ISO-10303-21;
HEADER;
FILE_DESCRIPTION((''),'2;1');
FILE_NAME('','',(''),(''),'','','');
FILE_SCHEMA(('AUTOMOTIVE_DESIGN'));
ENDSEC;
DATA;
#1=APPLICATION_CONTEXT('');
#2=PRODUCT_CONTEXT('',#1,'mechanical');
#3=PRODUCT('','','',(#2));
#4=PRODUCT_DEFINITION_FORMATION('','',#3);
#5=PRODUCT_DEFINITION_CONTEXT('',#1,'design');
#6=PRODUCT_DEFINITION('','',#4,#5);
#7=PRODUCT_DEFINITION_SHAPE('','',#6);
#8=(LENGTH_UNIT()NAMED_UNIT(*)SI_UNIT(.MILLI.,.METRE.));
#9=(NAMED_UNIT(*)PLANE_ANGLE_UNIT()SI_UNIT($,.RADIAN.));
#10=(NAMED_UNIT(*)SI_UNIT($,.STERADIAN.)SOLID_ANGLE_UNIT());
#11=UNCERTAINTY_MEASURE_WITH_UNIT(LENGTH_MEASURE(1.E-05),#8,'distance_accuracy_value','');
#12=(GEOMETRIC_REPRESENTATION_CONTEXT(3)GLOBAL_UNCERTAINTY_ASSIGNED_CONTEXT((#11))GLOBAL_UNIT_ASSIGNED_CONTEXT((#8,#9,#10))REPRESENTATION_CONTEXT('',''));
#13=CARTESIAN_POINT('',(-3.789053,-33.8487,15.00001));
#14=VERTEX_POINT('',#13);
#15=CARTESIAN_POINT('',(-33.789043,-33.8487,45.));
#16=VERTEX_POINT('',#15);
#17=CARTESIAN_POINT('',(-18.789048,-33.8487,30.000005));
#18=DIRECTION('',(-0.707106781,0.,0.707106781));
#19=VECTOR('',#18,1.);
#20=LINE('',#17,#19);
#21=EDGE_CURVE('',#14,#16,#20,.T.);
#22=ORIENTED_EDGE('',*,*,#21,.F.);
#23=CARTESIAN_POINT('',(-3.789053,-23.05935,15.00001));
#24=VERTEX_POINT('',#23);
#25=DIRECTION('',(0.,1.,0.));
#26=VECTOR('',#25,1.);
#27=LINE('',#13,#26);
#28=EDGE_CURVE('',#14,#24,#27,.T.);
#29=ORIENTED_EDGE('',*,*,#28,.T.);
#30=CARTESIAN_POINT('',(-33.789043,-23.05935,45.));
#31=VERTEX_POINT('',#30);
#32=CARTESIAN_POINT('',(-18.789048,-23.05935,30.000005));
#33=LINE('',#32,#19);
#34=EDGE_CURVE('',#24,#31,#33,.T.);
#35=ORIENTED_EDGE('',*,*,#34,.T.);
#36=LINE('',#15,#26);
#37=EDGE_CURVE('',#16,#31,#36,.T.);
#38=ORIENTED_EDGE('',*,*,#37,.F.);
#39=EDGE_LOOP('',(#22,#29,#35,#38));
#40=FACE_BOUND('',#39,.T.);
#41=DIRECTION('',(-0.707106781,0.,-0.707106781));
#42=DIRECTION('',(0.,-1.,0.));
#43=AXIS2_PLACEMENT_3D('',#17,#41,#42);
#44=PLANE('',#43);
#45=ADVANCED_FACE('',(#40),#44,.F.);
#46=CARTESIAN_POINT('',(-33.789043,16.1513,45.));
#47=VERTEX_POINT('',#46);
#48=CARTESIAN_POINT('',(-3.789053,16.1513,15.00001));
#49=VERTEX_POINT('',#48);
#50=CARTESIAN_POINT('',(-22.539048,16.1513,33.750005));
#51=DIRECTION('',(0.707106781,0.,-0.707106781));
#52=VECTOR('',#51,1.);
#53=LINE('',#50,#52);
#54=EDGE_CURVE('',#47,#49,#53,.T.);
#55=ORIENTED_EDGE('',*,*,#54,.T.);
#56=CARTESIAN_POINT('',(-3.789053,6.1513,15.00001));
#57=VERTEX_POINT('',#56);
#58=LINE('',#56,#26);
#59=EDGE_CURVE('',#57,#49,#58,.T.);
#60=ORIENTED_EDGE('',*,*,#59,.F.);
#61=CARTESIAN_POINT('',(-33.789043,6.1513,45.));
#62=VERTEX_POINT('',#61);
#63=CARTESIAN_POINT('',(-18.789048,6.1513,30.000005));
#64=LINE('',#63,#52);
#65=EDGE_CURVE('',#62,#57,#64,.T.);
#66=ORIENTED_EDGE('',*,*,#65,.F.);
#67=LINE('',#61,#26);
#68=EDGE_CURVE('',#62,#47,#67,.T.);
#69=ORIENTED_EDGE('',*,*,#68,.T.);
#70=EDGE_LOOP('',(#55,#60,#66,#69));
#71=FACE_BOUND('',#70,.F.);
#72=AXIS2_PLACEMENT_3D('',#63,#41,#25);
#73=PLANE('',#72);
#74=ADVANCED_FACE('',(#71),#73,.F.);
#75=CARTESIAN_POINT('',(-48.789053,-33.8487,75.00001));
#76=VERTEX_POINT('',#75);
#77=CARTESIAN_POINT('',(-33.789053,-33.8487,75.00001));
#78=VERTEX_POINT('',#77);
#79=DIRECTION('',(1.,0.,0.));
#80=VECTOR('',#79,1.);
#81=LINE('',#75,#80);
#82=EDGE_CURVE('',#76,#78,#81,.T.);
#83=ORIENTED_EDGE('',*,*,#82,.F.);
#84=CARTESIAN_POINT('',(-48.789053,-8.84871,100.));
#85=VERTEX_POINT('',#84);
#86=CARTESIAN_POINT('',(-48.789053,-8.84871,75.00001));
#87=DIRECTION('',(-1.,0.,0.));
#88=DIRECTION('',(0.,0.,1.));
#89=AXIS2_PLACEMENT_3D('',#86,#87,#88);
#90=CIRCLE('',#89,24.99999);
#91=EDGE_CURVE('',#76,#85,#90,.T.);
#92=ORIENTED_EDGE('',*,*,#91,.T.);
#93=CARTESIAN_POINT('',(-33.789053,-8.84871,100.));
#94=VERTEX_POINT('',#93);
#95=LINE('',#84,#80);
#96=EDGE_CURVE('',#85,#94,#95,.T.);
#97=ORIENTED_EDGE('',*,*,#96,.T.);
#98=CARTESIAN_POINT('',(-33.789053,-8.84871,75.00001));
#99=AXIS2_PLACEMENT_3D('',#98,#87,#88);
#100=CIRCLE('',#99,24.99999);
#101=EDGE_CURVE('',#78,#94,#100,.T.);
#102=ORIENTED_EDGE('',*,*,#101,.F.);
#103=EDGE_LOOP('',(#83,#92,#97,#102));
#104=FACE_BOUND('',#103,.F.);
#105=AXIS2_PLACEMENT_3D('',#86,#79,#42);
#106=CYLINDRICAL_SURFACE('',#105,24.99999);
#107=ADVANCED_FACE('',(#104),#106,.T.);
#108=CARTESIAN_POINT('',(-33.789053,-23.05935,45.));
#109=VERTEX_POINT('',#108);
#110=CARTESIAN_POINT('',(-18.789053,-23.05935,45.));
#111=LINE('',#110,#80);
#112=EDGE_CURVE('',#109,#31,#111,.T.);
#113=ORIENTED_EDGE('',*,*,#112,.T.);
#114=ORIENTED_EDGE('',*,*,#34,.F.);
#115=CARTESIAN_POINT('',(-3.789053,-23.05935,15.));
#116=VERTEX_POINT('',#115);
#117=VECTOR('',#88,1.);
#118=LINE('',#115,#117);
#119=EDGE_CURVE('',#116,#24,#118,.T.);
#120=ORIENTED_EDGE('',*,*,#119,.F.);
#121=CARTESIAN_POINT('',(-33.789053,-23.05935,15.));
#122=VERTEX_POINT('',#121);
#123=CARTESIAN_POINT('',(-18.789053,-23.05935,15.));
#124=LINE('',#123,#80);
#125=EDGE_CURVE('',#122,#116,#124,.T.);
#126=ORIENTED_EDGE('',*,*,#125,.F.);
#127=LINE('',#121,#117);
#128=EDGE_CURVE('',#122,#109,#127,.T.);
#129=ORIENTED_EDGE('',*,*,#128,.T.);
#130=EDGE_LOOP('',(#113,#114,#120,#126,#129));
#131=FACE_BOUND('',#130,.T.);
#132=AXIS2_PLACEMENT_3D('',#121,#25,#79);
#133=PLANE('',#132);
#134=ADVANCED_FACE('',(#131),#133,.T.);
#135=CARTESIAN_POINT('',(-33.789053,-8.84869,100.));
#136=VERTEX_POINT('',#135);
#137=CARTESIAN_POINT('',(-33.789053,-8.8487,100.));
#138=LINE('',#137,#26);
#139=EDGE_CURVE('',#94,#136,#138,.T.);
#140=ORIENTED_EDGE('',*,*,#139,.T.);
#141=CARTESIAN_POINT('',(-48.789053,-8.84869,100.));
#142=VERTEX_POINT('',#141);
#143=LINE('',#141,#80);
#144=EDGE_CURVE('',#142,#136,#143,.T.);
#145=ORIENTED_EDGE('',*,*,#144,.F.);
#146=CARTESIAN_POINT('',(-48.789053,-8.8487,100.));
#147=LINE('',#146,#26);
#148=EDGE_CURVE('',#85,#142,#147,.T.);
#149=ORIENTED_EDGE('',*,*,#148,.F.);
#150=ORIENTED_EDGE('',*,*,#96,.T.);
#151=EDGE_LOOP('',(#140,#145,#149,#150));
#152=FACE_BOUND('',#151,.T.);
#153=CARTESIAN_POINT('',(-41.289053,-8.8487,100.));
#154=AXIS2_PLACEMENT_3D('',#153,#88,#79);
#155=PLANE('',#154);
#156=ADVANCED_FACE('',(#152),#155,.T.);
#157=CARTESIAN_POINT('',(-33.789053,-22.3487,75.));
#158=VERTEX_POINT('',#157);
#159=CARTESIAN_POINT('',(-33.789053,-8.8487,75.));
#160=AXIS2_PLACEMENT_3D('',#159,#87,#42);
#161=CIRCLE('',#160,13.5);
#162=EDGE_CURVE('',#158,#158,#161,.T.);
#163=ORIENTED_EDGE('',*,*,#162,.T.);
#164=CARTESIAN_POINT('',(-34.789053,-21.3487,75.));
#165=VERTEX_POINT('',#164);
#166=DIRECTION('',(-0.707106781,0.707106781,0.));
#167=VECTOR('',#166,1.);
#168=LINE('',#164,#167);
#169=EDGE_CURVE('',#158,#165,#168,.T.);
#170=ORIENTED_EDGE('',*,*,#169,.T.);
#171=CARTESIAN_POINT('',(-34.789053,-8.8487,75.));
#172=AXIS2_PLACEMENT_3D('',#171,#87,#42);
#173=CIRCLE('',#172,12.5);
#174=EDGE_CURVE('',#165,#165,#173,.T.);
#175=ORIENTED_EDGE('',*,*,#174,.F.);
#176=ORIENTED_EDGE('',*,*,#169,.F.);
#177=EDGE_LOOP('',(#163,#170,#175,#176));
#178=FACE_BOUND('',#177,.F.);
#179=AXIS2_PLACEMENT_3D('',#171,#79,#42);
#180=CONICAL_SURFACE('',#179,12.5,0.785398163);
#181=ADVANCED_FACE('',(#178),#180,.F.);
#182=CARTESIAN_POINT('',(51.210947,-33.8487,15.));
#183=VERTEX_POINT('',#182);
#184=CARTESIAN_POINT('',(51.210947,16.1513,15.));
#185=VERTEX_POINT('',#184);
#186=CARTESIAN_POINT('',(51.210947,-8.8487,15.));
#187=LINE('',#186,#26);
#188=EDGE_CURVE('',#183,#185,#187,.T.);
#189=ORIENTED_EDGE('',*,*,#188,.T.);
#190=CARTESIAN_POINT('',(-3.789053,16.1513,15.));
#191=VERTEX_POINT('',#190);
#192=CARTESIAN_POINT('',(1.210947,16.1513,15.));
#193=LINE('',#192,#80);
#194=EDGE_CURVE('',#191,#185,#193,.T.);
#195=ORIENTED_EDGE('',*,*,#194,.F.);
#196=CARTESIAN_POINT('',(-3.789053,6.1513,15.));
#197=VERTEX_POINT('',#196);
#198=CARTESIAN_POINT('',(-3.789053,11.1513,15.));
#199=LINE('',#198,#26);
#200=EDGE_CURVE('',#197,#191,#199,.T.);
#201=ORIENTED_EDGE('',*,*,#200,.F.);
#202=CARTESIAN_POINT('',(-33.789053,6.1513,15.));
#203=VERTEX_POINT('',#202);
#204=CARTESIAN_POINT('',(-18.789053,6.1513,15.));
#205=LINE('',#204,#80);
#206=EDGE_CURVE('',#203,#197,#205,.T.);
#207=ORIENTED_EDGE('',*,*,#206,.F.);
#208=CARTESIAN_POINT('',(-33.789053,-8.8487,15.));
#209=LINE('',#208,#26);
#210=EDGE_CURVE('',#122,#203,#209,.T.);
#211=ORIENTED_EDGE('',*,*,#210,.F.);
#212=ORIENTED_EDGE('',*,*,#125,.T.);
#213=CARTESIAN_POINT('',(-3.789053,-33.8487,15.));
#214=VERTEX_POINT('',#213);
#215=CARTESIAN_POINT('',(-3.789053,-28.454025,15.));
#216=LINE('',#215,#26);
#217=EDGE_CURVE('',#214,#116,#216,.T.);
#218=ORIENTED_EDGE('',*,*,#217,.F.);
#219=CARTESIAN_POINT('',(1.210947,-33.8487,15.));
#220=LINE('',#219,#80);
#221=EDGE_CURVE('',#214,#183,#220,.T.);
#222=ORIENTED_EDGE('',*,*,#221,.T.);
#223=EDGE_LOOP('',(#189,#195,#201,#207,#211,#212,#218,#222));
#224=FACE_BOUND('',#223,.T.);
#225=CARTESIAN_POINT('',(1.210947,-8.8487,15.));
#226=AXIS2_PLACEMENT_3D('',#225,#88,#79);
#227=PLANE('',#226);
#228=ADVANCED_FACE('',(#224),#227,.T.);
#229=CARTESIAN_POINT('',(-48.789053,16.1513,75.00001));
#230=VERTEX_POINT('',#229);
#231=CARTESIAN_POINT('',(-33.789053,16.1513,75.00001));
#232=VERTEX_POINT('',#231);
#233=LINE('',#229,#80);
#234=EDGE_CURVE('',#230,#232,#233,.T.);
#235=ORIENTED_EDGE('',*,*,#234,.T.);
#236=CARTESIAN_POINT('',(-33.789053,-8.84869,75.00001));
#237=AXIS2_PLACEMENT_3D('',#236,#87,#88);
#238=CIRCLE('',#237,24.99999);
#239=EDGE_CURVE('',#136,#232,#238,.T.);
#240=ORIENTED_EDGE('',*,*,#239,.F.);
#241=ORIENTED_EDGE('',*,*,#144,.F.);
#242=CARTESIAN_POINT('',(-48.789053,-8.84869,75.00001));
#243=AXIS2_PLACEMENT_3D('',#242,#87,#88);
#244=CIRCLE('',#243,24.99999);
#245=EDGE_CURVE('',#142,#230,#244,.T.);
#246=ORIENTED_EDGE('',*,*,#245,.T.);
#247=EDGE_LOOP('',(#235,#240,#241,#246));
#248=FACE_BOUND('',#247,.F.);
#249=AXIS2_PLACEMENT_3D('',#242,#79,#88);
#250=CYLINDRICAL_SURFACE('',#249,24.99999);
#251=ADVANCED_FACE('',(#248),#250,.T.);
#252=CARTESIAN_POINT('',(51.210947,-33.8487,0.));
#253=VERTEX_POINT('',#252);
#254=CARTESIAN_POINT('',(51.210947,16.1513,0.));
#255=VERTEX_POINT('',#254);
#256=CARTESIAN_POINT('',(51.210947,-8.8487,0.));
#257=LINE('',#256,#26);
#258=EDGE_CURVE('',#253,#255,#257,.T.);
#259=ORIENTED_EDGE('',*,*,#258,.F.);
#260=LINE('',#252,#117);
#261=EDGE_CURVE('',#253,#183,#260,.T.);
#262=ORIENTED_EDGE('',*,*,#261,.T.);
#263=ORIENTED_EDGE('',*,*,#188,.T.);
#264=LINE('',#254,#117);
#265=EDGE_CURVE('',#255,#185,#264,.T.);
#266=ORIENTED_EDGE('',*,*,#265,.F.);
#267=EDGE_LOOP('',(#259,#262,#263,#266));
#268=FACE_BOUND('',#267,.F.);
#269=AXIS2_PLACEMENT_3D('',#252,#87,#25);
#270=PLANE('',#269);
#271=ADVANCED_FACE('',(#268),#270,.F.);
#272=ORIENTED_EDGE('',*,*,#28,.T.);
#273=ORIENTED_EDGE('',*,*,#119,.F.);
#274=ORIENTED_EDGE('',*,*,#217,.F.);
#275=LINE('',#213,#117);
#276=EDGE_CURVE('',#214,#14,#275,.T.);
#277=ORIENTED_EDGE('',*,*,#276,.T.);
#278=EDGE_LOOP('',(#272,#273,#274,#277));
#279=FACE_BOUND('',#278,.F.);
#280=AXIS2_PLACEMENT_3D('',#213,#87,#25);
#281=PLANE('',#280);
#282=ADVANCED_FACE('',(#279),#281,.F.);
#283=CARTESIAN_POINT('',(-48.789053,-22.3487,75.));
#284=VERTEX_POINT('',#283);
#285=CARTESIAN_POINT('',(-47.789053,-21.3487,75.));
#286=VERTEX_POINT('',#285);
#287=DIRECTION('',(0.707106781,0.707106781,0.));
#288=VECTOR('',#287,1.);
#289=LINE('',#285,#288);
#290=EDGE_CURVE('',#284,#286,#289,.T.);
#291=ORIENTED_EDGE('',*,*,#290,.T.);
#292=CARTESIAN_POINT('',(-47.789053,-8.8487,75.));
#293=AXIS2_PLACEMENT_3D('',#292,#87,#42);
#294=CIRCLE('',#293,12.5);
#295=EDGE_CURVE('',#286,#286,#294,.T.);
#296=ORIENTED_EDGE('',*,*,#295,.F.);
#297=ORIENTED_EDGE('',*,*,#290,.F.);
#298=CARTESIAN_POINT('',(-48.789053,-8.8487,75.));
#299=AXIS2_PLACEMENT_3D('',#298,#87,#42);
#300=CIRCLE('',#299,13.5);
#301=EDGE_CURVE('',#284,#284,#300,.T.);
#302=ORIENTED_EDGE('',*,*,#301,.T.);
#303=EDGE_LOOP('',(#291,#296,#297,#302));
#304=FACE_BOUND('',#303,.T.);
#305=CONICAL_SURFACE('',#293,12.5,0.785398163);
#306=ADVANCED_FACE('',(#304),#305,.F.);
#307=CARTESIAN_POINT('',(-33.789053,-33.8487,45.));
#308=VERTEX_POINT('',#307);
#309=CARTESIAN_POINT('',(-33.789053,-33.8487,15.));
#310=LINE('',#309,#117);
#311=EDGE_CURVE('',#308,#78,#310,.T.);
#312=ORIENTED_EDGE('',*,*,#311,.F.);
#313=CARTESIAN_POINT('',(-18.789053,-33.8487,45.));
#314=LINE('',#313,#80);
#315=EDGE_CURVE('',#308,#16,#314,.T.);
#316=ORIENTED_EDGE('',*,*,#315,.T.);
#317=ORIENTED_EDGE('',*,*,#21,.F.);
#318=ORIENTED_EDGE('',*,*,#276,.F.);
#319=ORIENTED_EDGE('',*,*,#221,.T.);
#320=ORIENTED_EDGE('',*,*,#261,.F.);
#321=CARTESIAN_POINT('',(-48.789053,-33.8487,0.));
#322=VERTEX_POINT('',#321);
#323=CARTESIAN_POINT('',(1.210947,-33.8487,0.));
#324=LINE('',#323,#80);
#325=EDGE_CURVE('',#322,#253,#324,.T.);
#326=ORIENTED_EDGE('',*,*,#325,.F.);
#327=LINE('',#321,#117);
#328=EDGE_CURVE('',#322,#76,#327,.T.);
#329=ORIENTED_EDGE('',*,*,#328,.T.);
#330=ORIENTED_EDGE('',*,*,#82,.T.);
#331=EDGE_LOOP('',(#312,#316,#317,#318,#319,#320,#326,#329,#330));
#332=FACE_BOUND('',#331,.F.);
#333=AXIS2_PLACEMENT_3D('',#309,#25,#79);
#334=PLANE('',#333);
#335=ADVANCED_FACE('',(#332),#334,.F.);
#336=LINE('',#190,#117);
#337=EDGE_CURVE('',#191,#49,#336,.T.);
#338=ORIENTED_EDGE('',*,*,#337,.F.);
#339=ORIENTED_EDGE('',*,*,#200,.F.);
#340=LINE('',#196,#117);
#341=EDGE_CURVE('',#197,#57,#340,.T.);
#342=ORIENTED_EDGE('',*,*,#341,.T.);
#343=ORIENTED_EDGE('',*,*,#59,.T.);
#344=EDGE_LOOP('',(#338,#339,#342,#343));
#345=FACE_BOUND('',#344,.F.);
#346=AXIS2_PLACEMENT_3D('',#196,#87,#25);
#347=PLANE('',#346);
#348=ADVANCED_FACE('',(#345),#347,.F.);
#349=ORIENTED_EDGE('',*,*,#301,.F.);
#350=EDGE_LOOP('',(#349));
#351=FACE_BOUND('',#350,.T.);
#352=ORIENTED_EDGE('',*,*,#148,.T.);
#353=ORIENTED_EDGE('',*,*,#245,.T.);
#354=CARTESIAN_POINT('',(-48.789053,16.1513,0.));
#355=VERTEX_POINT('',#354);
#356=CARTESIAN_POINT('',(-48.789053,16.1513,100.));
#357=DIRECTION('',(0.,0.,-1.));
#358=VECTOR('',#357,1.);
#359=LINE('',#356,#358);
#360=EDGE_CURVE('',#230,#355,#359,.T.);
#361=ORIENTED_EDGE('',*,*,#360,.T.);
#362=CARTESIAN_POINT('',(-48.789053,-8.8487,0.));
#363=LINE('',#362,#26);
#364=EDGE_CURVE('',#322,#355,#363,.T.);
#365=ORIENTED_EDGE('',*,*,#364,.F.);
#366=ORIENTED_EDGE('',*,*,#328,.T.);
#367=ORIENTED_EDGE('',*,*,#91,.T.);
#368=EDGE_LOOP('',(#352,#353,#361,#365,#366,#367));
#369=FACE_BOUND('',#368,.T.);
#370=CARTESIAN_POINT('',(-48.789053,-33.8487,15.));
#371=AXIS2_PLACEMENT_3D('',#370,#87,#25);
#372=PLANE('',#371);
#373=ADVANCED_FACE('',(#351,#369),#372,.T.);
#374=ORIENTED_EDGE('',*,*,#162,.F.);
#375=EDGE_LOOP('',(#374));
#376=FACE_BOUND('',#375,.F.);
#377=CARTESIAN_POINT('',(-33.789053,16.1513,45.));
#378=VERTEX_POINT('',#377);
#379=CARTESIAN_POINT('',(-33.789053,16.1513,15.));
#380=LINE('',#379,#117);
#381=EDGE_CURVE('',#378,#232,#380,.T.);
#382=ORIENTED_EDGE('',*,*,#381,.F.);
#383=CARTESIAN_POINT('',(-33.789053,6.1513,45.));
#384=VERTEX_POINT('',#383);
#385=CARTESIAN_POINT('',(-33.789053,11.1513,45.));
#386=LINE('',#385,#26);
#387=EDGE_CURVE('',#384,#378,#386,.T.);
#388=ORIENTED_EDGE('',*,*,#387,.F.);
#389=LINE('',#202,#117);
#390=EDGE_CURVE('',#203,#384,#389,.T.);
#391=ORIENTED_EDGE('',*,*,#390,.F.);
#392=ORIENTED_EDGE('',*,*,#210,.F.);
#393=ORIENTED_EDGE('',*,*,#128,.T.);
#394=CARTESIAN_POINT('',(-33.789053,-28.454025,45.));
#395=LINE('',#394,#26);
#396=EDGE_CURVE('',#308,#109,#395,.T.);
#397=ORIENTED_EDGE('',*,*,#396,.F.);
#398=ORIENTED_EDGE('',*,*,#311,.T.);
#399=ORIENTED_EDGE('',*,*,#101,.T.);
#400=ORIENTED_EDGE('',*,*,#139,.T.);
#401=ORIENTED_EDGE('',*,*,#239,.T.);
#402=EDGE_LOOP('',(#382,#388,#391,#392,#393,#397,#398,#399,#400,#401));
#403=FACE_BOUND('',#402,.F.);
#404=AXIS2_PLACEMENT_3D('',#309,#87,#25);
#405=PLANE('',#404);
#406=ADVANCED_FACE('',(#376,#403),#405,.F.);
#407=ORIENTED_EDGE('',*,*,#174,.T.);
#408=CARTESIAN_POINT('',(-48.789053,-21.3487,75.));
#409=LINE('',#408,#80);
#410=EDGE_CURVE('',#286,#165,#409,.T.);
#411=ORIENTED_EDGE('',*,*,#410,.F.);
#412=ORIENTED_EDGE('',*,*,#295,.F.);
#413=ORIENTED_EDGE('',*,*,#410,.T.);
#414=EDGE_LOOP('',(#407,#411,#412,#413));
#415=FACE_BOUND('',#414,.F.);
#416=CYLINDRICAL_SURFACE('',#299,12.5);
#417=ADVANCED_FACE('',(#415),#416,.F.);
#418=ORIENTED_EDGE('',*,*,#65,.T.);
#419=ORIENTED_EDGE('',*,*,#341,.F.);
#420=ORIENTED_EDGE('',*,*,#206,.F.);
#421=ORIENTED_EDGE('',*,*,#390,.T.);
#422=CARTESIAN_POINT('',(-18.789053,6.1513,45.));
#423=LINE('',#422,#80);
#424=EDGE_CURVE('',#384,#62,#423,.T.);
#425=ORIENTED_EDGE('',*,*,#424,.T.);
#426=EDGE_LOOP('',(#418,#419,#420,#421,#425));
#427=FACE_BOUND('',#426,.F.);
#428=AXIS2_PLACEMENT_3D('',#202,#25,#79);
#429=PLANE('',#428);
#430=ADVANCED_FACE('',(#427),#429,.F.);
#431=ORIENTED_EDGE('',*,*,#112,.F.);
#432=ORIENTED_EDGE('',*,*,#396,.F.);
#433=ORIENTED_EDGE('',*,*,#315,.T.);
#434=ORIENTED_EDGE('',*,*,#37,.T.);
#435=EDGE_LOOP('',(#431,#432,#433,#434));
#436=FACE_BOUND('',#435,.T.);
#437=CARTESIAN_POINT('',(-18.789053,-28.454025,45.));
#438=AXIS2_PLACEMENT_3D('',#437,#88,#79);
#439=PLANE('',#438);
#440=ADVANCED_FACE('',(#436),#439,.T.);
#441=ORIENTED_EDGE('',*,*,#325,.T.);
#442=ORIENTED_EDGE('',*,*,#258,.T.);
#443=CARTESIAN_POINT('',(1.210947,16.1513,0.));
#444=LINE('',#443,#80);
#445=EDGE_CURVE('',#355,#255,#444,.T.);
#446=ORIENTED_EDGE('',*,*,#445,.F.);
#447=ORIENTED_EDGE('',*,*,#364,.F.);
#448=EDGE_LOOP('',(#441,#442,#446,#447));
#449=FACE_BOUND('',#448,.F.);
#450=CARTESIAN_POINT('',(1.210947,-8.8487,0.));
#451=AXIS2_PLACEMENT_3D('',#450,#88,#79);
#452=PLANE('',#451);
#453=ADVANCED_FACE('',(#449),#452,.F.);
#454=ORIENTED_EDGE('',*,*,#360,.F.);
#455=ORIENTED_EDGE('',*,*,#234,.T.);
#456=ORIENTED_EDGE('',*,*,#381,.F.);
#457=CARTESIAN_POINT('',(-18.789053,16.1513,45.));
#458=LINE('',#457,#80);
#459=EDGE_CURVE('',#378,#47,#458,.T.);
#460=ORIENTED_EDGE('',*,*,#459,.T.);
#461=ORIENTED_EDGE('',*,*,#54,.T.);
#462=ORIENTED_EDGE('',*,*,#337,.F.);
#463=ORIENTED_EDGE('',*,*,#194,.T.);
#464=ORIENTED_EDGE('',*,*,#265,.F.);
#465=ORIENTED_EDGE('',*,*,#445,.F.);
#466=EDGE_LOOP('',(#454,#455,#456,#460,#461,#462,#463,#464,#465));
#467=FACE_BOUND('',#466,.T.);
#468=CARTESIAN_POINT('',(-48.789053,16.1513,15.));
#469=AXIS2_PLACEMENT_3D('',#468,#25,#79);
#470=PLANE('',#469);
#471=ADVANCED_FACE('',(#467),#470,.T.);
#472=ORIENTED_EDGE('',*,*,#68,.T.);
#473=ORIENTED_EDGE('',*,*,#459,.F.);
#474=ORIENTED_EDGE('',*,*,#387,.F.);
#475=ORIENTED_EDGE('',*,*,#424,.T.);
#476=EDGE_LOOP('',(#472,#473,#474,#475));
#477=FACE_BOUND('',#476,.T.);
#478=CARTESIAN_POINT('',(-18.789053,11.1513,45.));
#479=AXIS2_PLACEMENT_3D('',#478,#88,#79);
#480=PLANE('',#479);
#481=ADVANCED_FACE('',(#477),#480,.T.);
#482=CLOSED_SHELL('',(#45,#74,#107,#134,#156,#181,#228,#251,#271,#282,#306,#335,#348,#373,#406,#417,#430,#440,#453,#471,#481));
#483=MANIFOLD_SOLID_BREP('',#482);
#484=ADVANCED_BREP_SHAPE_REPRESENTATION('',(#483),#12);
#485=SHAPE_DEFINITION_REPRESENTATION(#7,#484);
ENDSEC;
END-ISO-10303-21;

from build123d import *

# Parameters (mm, degrees)
F0_W     = 100
F0_H     = 50
F1_DEPTH = 15
F2_W     = 15
F2_H     = 50
F3_DEPTH = 85
F4_W     = 30
F4_H     = 10.7893505692
F4_H_2   = 10
F5_DEPTH = 30
F6_SIZE  = 29.99999
F7_R     = 12.5
F8_R     = 12.5
F9_DEPTH = 25
F10_R    = 24.99999
F11_SIZE = 1


# Not quite as in the source:
# - a fillet or chamfer is up to 0.001 mm smaller than in the source, because OpenCascade refuses the exact size


with BuildPart() as f1:
    # F0 (on Top) → F1 (new body)
    with BuildSketch(Plane.XY):
        with Locations((1.2109465897, -8.8487002536)):
            Rectangle(F0_W, F0_H)
    extrude(amount=F1_DEPTH)

    # F2 (on face) → F3 (join)
    with BuildSketch(Plane.XY.offset(15)):
        with Locations((-41.2890534103, -8.8487002536)):
            Rectangle(F2_W, F2_H)
    extrude(amount=F3_DEPTH)

    # F4 (on face) → F5 (join)
    with BuildSketch(Plane.XY.offset(15)):
        with Locations((-18.7890534103, -28.454024969)):
            Rectangle(F4_W, F4_H)
        with Locations((-18.7890534103, 11.1512997464)):
            Rectangle(F4_W, F4_H_2)
    extrude(amount=F5_DEPTH)

    # F6 (size 30 in the source; OpenCascade refuses exactly that, so slightly less here)
    f6_edges = [f1.edges().sort_by_distance(p)[0] for p in [
        (-3.789053, 11.1513, 45),
        (-3.789053, -28.454025, 45),
    ]]
    chamfer(f6_edges, length=F6_SIZE)

    # F7 (on face) + F8 (on face) → F9 (cut)
    with BuildSketch(Plane(origin=(-48.7890534103, 0, 0), x_dir=(0, -1, 0), z_dir=(-1, 0, 0))):
        with Locations((8.8487002536, 75)):
            Circle(F7_R)
    with BuildSketch(Plane(origin=(-48.7890534103, 0, 0), x_dir=(0, -1, 0), z_dir=(-1, 0, 0))):
        with Locations((8.8487002536, 75)):
            Circle(F8_R)
    extrude(amount=-F9_DEPTH, mode=Mode.SUBTRACT)

    # F10 (radius 25 in the source; OpenCascade refuses exactly that, so slightly less here)
    f10_edges = [f1.edges().sort_by_distance(p)[0] for p in [
        (-41.289053, 16.1513, 100),
        (-41.289053, -33.8487, 100),
    ]]
    fillet(f10_edges, radius=F10_R)

    # F11
    f11_edges = [f1.edges().sort_by_distance(p)[0] for p in [
        (-33.789053, 3.6513, 75),
        (-48.789053, 3.6513, 75),
    ]]
    chamfer(f11_edges, length=F11_SIZE)


solid = f1.part
